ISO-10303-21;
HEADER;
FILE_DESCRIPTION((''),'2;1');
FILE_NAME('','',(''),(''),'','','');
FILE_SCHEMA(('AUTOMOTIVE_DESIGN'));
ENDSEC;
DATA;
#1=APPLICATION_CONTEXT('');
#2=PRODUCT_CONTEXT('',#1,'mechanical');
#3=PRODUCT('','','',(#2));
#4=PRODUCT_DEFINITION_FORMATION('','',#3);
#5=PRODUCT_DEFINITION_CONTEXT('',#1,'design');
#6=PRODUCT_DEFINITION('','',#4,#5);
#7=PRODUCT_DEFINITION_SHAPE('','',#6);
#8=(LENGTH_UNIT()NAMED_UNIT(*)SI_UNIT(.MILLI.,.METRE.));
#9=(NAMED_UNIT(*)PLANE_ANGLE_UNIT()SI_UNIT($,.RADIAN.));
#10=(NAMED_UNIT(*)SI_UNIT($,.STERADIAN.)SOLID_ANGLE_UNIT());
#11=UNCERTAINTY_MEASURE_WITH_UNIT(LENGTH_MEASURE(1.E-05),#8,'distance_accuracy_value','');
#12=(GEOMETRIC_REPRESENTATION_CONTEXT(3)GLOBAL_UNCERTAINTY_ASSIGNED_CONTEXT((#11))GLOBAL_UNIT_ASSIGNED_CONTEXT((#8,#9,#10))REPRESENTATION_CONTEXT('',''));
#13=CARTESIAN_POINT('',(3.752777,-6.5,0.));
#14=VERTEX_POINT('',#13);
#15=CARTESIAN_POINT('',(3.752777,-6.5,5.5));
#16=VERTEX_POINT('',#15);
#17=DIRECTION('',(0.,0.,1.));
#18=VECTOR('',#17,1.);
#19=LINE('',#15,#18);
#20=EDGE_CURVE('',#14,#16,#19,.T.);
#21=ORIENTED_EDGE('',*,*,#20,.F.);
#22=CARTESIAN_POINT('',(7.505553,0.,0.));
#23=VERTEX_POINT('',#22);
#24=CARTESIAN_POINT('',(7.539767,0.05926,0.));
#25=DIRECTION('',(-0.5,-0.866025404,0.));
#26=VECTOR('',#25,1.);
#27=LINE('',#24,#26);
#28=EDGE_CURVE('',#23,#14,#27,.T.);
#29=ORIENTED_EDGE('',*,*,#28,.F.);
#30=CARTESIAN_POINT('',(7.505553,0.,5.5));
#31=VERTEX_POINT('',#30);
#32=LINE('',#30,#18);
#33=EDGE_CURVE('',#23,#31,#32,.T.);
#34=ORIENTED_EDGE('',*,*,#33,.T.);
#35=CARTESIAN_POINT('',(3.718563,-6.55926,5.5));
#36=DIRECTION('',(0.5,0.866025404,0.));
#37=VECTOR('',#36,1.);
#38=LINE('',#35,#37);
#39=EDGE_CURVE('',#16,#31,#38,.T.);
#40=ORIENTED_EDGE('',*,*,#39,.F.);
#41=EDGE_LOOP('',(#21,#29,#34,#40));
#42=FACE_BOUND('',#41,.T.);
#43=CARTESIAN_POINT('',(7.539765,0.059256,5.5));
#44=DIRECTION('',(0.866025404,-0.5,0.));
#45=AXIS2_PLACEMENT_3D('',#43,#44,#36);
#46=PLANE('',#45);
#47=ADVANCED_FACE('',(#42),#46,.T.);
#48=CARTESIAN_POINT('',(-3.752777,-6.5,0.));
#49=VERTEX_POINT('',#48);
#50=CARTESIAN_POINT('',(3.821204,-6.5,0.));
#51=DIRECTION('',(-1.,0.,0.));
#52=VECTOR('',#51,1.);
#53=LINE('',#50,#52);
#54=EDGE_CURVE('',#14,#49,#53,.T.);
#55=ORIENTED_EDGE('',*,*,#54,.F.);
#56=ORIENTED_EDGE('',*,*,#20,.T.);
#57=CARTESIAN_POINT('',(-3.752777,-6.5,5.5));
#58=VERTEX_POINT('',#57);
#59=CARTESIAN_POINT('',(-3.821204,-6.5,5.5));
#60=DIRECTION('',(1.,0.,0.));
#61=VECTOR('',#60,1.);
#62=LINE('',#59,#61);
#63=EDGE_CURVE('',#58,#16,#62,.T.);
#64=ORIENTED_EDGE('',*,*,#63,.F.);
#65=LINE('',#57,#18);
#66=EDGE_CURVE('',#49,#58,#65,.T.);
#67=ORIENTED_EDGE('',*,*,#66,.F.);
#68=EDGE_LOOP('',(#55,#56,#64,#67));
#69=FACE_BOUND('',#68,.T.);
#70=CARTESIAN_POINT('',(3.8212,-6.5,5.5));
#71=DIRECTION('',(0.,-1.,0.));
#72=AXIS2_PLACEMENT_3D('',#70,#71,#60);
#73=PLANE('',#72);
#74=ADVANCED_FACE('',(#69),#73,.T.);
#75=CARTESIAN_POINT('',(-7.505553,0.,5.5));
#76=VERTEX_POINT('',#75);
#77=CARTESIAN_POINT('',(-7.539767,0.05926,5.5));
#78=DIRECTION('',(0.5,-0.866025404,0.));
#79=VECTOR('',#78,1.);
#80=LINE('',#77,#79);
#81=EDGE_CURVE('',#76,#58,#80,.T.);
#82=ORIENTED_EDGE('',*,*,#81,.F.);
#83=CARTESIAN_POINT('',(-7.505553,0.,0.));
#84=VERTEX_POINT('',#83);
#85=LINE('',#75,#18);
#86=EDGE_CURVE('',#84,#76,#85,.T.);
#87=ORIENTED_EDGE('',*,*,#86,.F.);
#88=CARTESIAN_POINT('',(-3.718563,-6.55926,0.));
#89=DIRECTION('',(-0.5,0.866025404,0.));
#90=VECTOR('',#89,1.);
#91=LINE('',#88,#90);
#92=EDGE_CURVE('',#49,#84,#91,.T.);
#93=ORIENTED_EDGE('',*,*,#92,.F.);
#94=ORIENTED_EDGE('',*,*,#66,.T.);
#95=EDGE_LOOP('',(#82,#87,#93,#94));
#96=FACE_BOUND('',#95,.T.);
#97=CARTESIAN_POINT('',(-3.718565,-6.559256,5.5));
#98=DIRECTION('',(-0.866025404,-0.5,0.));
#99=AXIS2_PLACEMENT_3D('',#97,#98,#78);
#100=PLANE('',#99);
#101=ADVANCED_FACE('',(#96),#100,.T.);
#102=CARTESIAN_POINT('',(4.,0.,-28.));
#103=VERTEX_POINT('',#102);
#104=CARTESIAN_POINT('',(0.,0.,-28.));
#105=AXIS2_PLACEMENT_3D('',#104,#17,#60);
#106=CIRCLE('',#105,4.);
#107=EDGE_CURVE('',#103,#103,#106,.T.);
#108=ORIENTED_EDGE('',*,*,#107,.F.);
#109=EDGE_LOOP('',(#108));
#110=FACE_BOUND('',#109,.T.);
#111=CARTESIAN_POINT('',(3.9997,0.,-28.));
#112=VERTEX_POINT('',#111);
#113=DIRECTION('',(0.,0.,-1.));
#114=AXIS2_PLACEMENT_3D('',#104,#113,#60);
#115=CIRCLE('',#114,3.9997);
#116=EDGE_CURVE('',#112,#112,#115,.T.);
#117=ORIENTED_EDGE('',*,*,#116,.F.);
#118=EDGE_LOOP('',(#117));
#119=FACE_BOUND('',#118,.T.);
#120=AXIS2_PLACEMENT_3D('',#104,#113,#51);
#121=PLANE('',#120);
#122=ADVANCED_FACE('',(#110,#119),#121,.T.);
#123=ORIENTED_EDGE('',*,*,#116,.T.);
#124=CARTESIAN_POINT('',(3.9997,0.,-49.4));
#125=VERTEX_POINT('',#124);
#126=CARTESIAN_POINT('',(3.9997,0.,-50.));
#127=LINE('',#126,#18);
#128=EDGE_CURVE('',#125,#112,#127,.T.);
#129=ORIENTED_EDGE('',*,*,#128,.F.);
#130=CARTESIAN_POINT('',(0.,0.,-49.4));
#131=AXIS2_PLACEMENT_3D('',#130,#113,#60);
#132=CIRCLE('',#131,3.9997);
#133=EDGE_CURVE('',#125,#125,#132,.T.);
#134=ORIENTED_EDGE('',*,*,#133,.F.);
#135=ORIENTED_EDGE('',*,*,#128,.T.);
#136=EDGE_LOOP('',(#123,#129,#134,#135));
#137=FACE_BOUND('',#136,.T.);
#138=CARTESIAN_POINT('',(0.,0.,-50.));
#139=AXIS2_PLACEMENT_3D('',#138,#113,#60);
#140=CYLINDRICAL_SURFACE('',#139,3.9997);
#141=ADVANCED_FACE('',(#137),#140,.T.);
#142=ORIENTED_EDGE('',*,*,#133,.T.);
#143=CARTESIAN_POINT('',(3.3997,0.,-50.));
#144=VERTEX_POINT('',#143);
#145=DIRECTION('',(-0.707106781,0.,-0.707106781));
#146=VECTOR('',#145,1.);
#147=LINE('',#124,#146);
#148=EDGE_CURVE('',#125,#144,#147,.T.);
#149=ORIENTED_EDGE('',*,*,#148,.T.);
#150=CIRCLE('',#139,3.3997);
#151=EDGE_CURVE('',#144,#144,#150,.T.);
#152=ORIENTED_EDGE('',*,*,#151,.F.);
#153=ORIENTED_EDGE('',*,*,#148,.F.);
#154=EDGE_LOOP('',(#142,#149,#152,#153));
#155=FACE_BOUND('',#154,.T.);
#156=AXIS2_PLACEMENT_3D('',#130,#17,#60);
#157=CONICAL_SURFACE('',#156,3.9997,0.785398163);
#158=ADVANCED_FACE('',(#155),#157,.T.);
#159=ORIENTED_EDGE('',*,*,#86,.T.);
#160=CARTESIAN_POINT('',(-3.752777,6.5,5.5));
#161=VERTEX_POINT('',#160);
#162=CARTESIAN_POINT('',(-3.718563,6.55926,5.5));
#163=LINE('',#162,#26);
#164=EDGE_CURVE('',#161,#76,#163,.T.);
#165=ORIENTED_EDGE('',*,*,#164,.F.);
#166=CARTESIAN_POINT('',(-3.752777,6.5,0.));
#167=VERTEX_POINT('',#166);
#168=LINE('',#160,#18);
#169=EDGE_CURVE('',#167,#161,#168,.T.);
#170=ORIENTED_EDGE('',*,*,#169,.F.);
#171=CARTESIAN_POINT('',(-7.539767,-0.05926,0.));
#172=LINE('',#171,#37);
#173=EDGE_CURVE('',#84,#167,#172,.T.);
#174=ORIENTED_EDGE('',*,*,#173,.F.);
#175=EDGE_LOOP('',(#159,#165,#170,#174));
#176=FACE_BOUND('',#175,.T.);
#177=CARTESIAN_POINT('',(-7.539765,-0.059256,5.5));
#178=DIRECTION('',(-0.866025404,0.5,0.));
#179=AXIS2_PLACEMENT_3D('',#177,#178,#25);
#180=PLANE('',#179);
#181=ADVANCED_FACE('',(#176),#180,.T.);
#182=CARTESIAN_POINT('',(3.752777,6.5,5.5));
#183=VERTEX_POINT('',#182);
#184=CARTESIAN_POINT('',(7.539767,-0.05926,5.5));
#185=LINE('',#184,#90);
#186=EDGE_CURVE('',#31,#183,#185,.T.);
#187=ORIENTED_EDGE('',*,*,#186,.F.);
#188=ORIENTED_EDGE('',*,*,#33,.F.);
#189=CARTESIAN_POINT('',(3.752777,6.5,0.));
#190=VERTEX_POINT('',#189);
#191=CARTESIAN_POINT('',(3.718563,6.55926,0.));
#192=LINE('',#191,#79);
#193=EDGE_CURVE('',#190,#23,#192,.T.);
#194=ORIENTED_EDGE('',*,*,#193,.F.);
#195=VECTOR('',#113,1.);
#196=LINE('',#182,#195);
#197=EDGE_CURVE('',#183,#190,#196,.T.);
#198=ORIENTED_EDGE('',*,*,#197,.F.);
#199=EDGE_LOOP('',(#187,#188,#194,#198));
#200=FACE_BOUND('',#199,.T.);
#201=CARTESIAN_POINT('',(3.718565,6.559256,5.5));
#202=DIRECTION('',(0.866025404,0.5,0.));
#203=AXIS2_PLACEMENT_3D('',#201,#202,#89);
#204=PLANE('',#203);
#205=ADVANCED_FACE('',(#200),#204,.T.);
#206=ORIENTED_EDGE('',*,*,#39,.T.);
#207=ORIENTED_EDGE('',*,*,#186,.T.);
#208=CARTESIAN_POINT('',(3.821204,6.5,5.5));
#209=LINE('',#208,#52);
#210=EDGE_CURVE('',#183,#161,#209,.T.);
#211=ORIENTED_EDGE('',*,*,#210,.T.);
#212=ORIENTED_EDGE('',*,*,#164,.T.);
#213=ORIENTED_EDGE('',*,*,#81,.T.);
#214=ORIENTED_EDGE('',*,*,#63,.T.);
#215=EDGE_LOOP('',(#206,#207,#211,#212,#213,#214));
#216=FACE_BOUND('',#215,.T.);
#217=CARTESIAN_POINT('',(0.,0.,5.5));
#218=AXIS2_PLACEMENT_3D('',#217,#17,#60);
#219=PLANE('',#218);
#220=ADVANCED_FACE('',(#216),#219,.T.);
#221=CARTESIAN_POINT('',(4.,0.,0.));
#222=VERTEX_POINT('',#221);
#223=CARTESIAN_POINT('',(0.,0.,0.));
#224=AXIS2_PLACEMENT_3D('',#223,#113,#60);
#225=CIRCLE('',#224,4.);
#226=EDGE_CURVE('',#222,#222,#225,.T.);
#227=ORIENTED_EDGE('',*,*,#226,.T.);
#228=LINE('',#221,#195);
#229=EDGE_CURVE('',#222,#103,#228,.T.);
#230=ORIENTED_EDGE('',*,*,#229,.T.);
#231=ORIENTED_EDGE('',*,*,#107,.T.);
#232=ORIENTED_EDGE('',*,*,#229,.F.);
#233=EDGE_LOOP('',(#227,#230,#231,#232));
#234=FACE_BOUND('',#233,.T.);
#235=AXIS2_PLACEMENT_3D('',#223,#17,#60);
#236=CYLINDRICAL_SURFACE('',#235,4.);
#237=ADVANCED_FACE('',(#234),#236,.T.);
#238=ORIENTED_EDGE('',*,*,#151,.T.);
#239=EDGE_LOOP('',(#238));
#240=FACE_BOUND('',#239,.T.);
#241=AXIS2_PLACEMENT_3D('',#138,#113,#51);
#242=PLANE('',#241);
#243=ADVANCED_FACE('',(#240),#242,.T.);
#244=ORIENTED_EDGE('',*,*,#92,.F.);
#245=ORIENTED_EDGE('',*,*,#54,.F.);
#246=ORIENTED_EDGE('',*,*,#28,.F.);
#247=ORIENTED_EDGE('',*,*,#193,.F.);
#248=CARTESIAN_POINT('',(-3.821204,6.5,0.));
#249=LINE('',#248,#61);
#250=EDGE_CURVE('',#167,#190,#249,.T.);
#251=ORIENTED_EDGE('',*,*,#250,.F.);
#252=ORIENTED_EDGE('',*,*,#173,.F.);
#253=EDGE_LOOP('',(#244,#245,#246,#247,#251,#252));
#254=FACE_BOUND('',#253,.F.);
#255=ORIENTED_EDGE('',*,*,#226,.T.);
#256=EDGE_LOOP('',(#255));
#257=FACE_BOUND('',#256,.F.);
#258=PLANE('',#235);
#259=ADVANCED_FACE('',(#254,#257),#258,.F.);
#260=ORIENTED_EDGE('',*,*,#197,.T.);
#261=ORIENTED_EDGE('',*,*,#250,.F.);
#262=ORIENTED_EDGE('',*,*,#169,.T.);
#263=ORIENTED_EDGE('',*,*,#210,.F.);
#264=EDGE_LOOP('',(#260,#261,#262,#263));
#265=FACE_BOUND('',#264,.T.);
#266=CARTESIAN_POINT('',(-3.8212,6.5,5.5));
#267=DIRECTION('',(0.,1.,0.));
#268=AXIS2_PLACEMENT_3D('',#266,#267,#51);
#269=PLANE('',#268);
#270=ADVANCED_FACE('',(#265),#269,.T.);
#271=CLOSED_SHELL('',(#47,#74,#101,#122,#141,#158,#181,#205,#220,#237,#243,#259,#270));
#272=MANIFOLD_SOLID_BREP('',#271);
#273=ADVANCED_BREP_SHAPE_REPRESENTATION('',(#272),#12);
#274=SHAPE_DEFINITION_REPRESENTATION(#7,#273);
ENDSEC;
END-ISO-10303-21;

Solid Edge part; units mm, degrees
sketch "Sketch1" plane through (0, 0, 0) normal (0, 0, 1) x (1, 0, 0)
  circle A0 centre (0, 0) radius 7.54
  dimension "D1" = 15.08
extrude "Protrusion1" add sketch "Sketch1" along normal blind 5.5
sketch "Sketch2" plane through (0, 0, 0) normal (0, 0, -1) x (1, 0, 0)
  circle A0 centre (0, 0) radius 4
extrude "Protrusion2" add sketch "Sketch2" along normal blind 50
sketch "Sketch3" plane through (0, 0, -50) normal (0, 0, -1) x (1, 0, 0)
  circle A0 centre (0, 0) radius 3.9997
extrude "Cutout1" cut sketch "Sketch3" against normal blind 22 flip side to cut
chamfer "Chamfer_1" distance 0.6 angle 45 1 edges at (-3.9997, 0, -50)
sketch "Sketch4" plane through (0, 0, 5.5) normal (0, 0, 1) x (1, 0, 0)
  line L0 (-3.8212, 6.5) -> (3.8212, 6.5)
  dimension "D1" = 13
extrude "Cutout2" cut sketch "Sketch4" against normal up to next material side at (0, 6.55, 5.5)
pattern_circular "Pattern1" count 6 over 360 about axis through (0, 0, 5.5) along (0, 0, 1) of "Cutout2"
properties part number "24101203"
